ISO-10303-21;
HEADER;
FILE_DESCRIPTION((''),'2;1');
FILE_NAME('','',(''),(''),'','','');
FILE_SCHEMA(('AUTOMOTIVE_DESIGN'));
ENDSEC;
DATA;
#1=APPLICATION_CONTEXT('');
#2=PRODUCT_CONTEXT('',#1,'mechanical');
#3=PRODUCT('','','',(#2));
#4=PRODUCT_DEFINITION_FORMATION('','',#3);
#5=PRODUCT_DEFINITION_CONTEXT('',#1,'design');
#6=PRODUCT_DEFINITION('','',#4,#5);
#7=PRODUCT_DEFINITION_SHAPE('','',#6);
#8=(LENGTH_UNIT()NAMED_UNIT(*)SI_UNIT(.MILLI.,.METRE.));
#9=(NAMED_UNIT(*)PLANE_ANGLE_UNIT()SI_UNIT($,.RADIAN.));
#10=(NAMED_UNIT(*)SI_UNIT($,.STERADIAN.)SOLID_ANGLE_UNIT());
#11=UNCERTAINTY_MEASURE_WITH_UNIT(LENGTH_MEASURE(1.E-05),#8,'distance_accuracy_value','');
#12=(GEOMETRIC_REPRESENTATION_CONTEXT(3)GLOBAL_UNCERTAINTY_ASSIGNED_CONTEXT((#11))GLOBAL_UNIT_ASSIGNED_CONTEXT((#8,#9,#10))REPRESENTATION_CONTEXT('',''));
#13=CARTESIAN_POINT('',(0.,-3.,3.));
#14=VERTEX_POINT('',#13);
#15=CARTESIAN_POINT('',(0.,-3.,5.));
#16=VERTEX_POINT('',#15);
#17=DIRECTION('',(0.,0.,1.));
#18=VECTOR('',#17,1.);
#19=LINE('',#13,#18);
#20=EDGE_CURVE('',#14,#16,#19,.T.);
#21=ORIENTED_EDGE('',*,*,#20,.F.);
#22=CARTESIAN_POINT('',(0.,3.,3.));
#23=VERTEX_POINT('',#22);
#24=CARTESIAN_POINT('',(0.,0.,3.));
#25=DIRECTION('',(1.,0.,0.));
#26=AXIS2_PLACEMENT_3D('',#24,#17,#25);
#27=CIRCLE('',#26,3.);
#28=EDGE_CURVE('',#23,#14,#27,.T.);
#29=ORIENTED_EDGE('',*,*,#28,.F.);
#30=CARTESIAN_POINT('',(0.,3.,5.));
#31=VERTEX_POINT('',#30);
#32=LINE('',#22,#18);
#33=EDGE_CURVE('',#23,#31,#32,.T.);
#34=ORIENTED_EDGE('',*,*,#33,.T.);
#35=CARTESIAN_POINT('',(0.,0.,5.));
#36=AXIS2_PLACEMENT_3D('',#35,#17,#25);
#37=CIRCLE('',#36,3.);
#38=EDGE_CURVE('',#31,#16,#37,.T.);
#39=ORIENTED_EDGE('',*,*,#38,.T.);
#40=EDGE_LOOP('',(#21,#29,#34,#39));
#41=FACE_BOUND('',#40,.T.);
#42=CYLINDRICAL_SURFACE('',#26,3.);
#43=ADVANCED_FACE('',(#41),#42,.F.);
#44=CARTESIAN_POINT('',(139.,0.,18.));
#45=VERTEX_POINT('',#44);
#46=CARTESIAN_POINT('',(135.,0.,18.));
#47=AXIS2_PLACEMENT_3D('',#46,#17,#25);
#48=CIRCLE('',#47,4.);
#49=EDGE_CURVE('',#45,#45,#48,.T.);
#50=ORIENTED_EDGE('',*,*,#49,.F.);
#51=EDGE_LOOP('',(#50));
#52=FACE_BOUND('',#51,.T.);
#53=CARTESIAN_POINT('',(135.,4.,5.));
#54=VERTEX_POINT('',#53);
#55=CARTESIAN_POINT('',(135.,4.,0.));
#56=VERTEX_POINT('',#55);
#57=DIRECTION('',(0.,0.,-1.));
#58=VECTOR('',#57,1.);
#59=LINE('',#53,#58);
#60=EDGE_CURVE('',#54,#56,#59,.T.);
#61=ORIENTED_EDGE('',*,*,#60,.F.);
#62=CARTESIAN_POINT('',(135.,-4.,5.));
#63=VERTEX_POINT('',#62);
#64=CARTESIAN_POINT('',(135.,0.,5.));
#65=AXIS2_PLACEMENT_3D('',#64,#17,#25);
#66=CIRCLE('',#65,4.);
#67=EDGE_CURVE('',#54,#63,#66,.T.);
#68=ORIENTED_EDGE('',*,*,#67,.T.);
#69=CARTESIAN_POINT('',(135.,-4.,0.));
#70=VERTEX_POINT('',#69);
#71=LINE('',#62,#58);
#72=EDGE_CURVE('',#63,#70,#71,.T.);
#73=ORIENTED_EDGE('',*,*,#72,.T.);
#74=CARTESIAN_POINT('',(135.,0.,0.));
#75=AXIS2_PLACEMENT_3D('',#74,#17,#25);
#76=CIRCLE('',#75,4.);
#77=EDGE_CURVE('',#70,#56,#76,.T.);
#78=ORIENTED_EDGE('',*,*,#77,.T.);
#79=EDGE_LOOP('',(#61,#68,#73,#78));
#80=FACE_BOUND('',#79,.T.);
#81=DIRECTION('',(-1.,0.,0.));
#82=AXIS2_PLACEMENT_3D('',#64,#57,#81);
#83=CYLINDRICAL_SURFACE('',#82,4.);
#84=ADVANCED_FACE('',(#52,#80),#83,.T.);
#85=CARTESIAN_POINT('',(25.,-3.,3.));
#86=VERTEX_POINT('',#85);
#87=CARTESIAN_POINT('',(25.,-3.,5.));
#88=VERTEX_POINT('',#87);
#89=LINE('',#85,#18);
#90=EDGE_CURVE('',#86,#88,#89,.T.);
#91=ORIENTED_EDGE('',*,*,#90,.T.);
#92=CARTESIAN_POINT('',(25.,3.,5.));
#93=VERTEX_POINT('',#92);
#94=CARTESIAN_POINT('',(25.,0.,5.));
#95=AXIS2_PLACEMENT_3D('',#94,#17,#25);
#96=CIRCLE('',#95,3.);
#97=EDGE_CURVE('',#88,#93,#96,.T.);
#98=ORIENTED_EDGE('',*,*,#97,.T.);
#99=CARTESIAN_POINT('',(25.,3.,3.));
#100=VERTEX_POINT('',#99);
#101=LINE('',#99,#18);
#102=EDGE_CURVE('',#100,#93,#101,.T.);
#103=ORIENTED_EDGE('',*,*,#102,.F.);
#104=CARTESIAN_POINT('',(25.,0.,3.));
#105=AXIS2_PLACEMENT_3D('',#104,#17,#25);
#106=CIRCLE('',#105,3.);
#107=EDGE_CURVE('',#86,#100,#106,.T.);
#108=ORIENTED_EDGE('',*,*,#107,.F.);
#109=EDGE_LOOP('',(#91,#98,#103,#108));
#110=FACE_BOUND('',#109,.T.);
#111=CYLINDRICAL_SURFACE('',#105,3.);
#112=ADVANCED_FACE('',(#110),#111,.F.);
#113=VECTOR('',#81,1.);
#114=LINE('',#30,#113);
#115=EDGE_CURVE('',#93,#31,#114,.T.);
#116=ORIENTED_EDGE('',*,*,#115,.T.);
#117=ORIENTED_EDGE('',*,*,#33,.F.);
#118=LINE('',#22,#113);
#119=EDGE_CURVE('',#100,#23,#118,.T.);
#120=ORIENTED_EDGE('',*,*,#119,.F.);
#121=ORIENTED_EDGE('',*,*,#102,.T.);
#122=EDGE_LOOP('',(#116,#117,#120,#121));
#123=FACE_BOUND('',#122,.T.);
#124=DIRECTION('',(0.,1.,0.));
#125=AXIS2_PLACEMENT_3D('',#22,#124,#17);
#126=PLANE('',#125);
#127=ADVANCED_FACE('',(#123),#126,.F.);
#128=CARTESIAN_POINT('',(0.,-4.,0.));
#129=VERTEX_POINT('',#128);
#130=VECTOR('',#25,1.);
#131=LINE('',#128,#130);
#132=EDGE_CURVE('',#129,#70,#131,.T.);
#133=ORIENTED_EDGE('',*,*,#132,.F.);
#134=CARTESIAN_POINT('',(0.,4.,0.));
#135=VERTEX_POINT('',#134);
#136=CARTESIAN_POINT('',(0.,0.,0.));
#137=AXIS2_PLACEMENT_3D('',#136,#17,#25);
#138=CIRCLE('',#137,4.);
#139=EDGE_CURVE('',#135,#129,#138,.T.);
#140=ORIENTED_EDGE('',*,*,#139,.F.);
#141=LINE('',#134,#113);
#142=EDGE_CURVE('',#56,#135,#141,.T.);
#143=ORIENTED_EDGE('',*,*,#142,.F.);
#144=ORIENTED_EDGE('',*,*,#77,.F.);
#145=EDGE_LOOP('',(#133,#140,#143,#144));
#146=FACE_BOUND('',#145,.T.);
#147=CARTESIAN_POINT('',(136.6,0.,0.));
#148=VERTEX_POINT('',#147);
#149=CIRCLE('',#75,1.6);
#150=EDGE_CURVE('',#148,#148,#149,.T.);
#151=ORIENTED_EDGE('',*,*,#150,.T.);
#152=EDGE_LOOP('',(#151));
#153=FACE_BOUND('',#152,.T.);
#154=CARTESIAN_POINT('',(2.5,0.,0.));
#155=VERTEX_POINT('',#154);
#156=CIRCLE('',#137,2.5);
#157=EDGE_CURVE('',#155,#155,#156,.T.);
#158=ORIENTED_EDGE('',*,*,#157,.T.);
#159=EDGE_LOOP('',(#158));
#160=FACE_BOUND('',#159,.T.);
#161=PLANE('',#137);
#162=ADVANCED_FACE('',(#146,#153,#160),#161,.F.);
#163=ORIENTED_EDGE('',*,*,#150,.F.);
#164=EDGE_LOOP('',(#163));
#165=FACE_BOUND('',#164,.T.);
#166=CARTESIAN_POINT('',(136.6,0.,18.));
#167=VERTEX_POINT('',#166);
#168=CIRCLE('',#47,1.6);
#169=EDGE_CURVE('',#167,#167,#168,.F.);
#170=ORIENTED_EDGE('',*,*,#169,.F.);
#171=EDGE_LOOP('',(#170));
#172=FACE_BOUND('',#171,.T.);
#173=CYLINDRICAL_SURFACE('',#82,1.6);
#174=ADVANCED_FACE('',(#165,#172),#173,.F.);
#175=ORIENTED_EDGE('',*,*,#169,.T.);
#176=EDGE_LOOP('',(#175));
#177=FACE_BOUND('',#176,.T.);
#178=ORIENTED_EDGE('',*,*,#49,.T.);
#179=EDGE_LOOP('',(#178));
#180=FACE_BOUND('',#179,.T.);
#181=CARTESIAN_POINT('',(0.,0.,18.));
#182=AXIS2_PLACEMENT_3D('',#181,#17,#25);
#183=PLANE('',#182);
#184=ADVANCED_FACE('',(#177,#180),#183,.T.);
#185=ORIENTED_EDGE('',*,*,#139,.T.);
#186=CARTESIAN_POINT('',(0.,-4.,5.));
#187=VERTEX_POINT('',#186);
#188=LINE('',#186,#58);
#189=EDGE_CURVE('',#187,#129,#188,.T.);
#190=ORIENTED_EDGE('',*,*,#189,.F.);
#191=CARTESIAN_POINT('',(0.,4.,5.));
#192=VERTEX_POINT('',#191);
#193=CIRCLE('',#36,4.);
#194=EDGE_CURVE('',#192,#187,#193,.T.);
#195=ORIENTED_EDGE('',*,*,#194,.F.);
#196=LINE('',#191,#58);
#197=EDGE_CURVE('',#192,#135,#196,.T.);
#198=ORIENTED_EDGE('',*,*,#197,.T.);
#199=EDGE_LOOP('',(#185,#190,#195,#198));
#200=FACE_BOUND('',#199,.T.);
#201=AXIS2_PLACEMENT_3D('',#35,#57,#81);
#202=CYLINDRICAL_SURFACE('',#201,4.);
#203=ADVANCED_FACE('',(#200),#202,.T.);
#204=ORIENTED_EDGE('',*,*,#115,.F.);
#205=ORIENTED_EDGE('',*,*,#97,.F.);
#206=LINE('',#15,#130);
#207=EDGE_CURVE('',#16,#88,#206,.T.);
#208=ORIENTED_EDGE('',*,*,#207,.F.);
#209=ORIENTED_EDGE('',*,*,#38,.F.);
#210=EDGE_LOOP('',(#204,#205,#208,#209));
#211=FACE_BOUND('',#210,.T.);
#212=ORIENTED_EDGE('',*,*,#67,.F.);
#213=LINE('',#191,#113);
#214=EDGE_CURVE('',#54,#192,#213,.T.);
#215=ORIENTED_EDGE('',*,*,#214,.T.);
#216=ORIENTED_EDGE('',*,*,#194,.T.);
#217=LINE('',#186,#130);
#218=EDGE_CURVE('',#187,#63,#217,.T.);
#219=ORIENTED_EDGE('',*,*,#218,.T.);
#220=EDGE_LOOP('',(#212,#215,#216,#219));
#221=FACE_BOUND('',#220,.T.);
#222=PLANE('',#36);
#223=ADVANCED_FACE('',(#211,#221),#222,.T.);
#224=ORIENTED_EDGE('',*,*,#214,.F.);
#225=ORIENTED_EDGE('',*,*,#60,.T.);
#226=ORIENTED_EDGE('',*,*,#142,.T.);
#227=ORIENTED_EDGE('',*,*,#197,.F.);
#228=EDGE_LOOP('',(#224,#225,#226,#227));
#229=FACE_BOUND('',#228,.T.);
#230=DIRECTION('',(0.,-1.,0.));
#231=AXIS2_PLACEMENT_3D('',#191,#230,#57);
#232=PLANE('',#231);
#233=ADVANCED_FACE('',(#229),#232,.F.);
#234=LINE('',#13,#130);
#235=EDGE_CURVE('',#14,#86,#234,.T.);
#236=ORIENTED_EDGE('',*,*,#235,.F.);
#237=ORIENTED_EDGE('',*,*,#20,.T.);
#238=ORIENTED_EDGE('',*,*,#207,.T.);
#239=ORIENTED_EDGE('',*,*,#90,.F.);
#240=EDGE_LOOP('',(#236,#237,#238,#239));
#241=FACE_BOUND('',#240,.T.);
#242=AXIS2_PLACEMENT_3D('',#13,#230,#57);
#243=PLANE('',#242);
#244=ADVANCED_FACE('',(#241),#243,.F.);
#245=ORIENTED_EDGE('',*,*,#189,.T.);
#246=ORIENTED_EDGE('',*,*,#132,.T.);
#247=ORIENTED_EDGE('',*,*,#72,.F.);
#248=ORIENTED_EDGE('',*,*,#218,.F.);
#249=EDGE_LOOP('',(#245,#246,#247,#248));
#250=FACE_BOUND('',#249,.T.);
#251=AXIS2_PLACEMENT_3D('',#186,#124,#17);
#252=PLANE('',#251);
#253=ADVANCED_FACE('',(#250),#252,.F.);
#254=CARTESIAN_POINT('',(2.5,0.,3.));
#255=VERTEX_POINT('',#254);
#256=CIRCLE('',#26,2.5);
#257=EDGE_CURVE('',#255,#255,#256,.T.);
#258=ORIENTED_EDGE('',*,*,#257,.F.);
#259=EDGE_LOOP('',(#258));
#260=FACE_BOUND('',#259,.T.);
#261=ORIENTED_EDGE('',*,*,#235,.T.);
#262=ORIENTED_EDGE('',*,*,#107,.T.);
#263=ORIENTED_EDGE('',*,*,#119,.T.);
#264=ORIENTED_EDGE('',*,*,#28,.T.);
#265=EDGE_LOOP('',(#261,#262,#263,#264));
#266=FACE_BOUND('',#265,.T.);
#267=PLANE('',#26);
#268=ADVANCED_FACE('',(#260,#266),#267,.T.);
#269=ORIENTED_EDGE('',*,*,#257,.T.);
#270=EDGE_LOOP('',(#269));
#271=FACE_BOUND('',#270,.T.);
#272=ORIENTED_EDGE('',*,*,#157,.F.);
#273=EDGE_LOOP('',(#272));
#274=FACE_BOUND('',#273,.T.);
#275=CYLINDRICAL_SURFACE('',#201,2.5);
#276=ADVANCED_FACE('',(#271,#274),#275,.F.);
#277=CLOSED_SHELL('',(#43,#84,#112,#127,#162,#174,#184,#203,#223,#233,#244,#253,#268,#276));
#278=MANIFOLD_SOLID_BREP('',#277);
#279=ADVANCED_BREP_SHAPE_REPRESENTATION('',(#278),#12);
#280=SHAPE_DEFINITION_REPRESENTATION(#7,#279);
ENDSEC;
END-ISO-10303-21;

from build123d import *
from build123d.topology import SkipClean

# Parameters (mm, degrees)
SKETCH2_R           = 2.5
SKETCH2_R_2         = 1.6
BOSS_EXTRUDE1_DEPTH = 5
SKETCH3_R           = 1.6
BOSS_EXTRUDE2_DEPTH = 13
CUT_EXTRUDE1_DEPTH  = 2


with BuildPart() as part:
    # Sketch2 → Boss-Extrude1 (new body)
    with BuildSketch(Plane.XY):
        with BuildLine():
            Line((0, 4), (135, 4))
            ThreePointArc((135, 4), (139, 0), (135, -4))
            Line((135, -4), (0, -4))
            ThreePointArc((0, -4), (-4, 0), (0, 4))
        make_face()
        Circle(SKETCH2_R, mode=Mode.SUBTRACT)
        with Locations((135, 0)):
            Circle(SKETCH2_R_2, mode=Mode.SUBTRACT)
    extrude(amount=BOSS_EXTRUDE1_DEPTH)

    # Sketch3 → Boss-Extrude2 (add)
    with SkipClean():  # the faces are left unmerged after this step: merging them gives an invalid solid
        with BuildSketch(Plane.XY.offset(5)):
            with BuildLine():
                ThreePointArc((135, 4), (131, 0), (135, -4))
                ThreePointArc((135, -4), (139, 0), (135, 4))
            make_face()
            with Locations((135, 0)):
                Circle(SKETCH3_R, mode=Mode.SUBTRACT)
        extrude(amount=BOSS_EXTRUDE2_DEPTH)
    add(part.part.scale(1), mode=Mode.REPLACE)  # the faces are merged on a copy

    # Sketch4 → Cut-Extrude1 (cut)
    with BuildSketch(Plane.XY.offset(5)):
        with BuildLine():
            Line((0, 3), (25, 3))
            ThreePointArc((25, 3), (28, 0), (25, -3))
            Line((25, -3), (0, -3))
            ThreePointArc((0, -3), (-3, 0), (0, 3))
        make_face()
    extrude(amount=-CUT_EXTRUDE1_DEPTH, mode=Mode.SUBTRACT)


solid = part.part
